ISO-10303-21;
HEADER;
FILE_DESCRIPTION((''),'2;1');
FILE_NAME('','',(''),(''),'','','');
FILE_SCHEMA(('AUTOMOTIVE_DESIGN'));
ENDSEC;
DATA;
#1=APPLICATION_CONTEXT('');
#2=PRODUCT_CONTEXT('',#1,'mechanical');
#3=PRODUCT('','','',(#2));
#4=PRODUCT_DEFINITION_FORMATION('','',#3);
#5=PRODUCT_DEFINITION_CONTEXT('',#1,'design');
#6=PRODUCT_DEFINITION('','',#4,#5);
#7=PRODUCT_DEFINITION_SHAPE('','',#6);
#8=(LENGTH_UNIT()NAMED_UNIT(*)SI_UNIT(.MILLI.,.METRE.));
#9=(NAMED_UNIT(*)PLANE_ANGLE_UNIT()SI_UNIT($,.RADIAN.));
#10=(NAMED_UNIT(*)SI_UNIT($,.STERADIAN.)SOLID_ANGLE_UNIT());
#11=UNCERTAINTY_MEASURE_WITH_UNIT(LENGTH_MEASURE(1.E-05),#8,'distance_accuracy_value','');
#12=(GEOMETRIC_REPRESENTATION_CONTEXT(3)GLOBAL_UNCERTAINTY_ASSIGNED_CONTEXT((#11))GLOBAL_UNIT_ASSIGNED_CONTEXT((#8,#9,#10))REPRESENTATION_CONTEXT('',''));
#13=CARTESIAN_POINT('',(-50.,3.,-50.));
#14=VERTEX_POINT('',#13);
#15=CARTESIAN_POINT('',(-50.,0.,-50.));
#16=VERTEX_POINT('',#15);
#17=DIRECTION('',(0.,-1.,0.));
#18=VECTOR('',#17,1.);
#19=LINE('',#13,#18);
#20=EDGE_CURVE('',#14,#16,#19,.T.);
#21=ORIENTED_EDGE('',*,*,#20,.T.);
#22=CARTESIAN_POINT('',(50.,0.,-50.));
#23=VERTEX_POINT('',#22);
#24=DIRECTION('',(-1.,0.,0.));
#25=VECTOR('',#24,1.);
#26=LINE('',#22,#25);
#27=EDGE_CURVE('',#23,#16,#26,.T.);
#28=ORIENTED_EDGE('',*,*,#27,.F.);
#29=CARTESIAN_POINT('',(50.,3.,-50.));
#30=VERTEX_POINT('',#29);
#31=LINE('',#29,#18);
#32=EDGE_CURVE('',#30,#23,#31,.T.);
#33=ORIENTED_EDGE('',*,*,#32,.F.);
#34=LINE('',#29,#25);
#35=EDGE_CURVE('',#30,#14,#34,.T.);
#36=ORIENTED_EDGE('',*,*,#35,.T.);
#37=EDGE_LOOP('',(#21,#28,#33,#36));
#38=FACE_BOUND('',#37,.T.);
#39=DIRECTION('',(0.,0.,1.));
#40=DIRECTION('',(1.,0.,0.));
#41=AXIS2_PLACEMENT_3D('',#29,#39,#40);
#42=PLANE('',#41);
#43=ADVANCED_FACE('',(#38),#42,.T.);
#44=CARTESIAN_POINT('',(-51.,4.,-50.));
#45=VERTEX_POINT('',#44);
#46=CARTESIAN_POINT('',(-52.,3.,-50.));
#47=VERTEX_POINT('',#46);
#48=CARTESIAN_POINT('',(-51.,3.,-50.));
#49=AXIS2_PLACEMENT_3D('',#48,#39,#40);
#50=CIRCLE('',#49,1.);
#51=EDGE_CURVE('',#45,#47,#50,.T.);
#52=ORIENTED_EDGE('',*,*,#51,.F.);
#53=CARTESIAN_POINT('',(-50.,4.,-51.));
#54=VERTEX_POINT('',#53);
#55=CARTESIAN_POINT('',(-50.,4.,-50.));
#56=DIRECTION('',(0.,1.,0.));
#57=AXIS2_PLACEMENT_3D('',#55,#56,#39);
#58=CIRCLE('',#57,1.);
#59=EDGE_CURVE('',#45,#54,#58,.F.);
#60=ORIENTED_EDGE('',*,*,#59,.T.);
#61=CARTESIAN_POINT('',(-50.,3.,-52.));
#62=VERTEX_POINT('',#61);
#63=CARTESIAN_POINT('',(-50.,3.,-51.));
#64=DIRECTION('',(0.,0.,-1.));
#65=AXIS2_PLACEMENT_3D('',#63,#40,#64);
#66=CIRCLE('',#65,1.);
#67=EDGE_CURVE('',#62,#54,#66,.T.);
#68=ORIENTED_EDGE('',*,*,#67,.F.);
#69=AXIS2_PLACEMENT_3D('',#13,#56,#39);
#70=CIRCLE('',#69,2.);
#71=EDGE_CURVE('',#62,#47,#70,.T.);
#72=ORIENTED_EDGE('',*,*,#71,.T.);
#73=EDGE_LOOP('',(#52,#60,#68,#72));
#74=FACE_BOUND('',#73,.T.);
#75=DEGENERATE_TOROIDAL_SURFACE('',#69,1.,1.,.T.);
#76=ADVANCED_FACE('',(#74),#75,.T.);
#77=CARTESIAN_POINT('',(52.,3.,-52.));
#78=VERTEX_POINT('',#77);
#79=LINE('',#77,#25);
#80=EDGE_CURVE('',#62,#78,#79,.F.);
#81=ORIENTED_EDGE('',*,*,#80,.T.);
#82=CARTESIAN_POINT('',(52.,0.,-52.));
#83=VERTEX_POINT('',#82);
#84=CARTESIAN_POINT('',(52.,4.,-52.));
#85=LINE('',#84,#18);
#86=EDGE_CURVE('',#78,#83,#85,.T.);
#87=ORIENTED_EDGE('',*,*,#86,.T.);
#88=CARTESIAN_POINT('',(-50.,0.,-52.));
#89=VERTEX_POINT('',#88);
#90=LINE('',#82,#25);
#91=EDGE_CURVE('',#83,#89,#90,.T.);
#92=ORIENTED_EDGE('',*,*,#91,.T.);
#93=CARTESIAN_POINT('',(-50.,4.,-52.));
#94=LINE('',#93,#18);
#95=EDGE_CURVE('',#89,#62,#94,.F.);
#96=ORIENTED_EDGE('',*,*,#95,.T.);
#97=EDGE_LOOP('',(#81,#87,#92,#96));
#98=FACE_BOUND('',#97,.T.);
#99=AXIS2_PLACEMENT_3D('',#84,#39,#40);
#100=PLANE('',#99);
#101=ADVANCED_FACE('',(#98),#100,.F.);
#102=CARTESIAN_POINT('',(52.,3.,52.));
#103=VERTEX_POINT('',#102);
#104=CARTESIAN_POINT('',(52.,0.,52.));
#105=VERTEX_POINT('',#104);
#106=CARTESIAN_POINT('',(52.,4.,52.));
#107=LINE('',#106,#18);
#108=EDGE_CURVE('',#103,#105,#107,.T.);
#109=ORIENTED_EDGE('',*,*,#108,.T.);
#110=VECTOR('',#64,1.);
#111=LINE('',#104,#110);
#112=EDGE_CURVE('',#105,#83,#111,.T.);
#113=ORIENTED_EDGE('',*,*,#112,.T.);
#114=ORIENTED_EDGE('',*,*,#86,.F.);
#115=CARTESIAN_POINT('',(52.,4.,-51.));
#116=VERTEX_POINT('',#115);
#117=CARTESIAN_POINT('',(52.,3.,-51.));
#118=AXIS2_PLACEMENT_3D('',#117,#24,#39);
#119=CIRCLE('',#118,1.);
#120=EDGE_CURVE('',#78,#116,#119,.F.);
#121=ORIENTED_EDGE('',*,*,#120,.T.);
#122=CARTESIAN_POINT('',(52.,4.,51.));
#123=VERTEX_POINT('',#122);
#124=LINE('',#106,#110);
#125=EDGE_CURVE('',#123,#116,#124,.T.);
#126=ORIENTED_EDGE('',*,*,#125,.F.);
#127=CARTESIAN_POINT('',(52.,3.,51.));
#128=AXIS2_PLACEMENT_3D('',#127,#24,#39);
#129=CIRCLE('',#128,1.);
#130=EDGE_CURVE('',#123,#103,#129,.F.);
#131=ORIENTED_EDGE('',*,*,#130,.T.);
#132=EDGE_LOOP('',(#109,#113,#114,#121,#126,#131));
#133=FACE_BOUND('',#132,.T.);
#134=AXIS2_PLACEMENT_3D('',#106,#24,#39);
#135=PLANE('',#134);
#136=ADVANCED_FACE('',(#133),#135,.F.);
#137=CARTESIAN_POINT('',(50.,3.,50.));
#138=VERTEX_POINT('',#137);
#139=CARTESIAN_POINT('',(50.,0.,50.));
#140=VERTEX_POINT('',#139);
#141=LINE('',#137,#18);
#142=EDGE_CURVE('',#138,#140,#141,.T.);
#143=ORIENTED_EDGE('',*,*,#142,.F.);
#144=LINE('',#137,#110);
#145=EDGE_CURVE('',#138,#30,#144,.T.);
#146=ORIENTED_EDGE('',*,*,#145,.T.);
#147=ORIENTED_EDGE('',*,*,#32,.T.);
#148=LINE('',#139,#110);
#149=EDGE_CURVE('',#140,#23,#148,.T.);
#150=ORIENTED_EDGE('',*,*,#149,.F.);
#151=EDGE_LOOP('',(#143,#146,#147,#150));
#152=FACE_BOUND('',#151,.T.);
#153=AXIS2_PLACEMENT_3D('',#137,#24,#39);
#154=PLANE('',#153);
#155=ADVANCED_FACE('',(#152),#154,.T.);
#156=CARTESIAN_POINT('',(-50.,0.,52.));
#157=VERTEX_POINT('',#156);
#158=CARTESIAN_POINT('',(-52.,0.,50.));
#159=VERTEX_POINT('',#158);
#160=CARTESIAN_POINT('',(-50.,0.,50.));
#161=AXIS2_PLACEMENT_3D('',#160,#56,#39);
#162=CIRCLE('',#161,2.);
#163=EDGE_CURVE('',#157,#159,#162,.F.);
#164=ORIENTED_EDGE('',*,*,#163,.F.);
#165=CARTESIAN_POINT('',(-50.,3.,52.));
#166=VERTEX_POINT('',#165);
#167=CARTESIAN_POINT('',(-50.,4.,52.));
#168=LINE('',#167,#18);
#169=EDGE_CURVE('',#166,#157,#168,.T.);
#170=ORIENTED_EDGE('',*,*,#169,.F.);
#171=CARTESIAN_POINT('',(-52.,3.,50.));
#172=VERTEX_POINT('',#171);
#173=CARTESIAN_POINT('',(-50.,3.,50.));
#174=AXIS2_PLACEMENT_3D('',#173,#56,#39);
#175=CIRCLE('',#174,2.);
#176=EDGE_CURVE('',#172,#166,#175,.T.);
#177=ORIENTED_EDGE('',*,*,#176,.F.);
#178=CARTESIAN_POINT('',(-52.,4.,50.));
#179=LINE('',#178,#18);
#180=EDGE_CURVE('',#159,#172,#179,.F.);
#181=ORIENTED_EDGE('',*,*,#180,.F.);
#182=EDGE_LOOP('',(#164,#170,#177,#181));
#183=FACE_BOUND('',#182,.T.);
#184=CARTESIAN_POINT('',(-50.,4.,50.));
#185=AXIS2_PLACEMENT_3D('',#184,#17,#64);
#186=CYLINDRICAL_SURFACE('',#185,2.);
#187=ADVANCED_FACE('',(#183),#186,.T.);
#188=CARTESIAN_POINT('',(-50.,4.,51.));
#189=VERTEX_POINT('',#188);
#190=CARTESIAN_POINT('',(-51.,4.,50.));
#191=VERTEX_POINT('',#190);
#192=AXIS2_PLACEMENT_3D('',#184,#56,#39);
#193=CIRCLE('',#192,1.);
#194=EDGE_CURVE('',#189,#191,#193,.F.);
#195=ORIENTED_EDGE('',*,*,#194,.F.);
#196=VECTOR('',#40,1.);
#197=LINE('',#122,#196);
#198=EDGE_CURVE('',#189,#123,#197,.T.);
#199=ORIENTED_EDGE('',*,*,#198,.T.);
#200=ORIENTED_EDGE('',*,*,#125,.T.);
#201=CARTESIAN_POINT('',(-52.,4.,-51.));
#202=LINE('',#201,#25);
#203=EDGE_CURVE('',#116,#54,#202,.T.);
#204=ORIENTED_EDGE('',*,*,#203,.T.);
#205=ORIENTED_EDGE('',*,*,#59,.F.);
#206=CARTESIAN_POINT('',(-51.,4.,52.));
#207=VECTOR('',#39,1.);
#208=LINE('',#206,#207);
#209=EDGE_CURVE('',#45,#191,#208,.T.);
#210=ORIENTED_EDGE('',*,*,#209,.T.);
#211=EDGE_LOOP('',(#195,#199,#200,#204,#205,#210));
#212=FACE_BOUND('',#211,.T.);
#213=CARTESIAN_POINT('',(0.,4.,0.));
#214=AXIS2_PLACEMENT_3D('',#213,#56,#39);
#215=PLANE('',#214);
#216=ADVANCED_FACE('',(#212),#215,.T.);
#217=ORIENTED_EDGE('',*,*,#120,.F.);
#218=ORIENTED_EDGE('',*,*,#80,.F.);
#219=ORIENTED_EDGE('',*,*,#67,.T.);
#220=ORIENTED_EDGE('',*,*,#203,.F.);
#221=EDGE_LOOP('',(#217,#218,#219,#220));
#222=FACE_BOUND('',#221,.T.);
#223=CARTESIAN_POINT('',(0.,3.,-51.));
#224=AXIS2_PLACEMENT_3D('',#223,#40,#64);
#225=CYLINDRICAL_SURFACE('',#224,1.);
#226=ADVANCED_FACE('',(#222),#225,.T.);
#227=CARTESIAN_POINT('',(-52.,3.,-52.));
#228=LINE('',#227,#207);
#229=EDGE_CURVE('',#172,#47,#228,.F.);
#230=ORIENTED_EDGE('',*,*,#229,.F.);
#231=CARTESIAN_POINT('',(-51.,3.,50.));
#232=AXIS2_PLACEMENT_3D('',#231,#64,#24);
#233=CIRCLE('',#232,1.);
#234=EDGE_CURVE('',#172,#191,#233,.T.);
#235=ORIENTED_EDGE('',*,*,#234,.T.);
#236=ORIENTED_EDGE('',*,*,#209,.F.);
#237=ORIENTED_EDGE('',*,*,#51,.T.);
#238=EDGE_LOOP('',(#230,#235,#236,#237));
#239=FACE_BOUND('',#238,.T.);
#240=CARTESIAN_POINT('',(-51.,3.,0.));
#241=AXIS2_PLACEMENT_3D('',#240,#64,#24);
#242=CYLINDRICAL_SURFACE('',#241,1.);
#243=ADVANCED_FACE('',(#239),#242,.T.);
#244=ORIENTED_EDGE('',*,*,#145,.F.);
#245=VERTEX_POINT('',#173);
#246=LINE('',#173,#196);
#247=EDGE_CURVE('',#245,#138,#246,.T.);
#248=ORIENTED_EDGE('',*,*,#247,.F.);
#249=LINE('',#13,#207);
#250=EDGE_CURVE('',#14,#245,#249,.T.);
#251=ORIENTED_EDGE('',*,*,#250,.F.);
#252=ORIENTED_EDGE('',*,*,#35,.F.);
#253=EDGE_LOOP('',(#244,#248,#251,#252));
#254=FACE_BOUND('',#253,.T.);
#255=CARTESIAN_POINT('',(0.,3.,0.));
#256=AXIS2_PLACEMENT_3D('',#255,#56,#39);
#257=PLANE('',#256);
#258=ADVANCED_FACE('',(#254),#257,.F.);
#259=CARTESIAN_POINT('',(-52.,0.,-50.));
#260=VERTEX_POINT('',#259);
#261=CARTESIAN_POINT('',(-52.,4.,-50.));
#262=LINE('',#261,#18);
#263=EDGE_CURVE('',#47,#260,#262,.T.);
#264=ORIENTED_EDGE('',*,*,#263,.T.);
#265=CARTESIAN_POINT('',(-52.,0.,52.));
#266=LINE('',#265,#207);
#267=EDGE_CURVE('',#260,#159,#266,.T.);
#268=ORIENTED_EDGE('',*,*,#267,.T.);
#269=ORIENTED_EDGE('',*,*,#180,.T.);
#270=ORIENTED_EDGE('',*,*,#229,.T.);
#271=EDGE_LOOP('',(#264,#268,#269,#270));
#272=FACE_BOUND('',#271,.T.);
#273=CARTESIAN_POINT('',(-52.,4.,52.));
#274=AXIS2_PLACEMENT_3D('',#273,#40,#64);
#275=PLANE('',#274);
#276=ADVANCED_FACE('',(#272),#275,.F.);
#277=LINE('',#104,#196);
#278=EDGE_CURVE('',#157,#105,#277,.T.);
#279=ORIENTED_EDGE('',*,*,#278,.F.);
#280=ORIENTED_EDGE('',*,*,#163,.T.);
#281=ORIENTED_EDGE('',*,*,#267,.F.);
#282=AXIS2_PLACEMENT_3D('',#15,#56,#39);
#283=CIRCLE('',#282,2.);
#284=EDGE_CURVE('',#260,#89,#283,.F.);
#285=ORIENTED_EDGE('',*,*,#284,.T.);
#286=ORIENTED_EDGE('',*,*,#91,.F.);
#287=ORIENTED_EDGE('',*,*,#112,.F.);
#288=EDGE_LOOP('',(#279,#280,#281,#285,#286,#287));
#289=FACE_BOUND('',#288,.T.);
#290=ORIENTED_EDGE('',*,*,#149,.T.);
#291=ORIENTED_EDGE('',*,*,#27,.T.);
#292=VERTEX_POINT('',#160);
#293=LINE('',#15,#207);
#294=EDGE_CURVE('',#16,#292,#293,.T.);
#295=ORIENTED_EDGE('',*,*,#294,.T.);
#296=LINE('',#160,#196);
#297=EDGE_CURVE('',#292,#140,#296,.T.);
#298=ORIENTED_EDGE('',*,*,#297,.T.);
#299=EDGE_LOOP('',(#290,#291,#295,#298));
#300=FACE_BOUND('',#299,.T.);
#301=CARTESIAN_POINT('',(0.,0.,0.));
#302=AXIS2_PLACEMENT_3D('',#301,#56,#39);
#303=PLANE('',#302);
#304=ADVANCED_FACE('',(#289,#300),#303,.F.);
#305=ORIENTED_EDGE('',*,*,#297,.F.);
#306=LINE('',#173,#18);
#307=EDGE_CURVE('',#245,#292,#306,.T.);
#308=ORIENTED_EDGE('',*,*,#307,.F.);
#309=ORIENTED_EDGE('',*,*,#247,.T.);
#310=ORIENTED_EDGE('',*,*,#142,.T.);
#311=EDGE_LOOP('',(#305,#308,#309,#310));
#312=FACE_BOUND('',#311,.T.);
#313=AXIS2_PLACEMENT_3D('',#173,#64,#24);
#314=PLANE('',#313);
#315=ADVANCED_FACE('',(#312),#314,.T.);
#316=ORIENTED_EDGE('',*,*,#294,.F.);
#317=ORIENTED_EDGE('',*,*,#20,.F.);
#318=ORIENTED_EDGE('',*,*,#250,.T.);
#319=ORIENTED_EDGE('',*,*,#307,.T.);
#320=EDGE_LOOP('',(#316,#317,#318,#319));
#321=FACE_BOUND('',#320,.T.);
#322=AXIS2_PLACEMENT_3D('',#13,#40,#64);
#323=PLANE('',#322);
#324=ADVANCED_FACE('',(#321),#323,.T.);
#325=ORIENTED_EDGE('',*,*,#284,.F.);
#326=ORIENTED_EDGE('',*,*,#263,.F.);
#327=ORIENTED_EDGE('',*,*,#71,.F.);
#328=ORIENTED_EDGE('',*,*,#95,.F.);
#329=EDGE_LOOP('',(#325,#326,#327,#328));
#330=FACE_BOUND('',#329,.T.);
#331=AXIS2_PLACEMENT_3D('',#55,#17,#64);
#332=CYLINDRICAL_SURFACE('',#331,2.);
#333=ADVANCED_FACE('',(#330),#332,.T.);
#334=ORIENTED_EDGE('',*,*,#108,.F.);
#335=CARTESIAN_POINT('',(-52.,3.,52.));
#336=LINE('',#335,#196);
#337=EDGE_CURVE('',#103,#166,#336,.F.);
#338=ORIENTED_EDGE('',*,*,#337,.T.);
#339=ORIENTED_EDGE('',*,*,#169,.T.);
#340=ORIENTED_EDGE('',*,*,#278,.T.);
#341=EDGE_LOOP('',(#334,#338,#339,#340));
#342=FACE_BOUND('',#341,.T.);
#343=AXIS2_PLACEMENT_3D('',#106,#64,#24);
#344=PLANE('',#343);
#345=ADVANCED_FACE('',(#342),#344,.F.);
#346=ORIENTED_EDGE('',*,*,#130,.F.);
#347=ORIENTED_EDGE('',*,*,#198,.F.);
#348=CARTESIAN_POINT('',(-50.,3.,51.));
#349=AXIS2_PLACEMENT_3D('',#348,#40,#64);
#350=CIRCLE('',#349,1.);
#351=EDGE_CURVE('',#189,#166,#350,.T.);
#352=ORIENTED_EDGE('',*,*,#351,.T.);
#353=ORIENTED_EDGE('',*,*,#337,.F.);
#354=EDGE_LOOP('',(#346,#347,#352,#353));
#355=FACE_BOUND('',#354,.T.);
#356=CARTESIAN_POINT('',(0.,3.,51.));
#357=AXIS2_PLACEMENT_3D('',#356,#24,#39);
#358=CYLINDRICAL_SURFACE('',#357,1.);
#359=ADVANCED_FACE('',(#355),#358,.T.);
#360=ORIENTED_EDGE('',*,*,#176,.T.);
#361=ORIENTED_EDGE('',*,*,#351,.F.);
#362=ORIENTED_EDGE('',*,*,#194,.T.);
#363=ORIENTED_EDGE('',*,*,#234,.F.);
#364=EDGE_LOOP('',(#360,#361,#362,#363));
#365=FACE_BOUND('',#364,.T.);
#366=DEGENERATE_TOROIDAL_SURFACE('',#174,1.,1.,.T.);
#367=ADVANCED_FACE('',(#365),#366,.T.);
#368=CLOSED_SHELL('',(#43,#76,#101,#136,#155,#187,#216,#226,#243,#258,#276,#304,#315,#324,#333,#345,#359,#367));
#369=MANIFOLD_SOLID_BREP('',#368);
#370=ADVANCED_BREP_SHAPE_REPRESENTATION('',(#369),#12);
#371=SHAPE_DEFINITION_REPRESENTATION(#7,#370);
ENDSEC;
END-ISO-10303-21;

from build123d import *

# Parameters (mm, degrees)
SCHIZZO1_W                   = 104
SCHIZZO1_H                   = 104
ESTRUSIONE_ESTRUSIONE1_DEPTH = 4
SCHIZZO2_W                   = 100
SCHIZZO2_H                   = 100
TAGLIO_ESTRUSIONE2_DEPTH     = 3
RACCORDO1_R                  = 1
RACCORDO2_R                  = 2


with BuildPart() as part:
    # Schizzo1 → Estrusione-Estrusione1 (new body)
    with BuildSketch(Plane(origin=(0, 0, 0), x_dir=(1, 0, 0), z_dir=(0, 1, 0))):
        Rectangle(SCHIZZO1_W, SCHIZZO1_H)
    extrude(amount=ESTRUSIONE_ESTRUSIONE1_DEPTH)

    # Schizzo2 → Taglio-Estrusione2 (cut)
    with BuildSketch(Plane(origin=(0, 0, 0), x_dir=(1, 0, 0), z_dir=(0, 1, 0))):
        Rectangle(SCHIZZO2_W, SCHIZZO2_H)
    extrude(amount=TAGLIO_ESTRUSIONE2_DEPTH, mode=Mode.SUBTRACT)

    # Raccordo1
    raccordo1_edges = [part.edges().sort_by_distance(p)[0] for p in [
        (0, 4, -52),
        (-52, 4, 0),
        (0, 4, 52),
    ]]
    fillet(raccordo1_edges, radius=RACCORDO1_R)

    # Raccordo2
    # the kernel refuses this fillet: 2 mm, written as the material it takes off along each edge
    with BuildSketch(Plane(origin=(-50, 4, -50), x_dir=(0, 0, -1), z_dir=(1, 0, 0))) as raccordo2_piece_1:
        with BuildLine():
            CenterArc((1, -1), 1, 0, 90)
            Line((2, -1), (2, 0))
            Line((2, 0), (1, 0))
        make_face()
    revolve(axis=Axis((-50, 4, -50), (0, 1, 0)), revolution_arc=90, mode=Mode.SUBTRACT)
    with BuildSketch(Plane(origin=(-50, 4, 50), x_dir=(-1, 0, 0), z_dir=(0, 0, -1))) as raccordo2_piece_2:
        with BuildLine():
            CenterArc((1, -1), 1, 0, 90)
            Line((2, -1), (2, 0))
            Line((2, 0), (1, 0))
        make_face()
    revolve(axis=Axis((-50, 4, 50), (0, 1, 0)), revolution_arc=90, mode=Mode.SUBTRACT)
    with BuildSketch(Plane(origin=(-52, -5, 52), x_dir=(1, 0, 0), z_dir=(0, 1, 0)), Plane(origin=(-52, -5, -52), x_dir=(0, 0, 1), z_dir=(0, 1, 0))) as raccordo2_piece_3:
        with BuildLine():
            CenterArc((RACCORDO2_R, RACCORDO2_R), RACCORDO2_R, 180, 90)
            Line((0, RACCORDO2_R), (0, 0))
            Line((0, 0), (RACCORDO2_R, 0))
        make_face()
    extrude(amount=9, mode=Mode.SUBTRACT)


solid = part.part
